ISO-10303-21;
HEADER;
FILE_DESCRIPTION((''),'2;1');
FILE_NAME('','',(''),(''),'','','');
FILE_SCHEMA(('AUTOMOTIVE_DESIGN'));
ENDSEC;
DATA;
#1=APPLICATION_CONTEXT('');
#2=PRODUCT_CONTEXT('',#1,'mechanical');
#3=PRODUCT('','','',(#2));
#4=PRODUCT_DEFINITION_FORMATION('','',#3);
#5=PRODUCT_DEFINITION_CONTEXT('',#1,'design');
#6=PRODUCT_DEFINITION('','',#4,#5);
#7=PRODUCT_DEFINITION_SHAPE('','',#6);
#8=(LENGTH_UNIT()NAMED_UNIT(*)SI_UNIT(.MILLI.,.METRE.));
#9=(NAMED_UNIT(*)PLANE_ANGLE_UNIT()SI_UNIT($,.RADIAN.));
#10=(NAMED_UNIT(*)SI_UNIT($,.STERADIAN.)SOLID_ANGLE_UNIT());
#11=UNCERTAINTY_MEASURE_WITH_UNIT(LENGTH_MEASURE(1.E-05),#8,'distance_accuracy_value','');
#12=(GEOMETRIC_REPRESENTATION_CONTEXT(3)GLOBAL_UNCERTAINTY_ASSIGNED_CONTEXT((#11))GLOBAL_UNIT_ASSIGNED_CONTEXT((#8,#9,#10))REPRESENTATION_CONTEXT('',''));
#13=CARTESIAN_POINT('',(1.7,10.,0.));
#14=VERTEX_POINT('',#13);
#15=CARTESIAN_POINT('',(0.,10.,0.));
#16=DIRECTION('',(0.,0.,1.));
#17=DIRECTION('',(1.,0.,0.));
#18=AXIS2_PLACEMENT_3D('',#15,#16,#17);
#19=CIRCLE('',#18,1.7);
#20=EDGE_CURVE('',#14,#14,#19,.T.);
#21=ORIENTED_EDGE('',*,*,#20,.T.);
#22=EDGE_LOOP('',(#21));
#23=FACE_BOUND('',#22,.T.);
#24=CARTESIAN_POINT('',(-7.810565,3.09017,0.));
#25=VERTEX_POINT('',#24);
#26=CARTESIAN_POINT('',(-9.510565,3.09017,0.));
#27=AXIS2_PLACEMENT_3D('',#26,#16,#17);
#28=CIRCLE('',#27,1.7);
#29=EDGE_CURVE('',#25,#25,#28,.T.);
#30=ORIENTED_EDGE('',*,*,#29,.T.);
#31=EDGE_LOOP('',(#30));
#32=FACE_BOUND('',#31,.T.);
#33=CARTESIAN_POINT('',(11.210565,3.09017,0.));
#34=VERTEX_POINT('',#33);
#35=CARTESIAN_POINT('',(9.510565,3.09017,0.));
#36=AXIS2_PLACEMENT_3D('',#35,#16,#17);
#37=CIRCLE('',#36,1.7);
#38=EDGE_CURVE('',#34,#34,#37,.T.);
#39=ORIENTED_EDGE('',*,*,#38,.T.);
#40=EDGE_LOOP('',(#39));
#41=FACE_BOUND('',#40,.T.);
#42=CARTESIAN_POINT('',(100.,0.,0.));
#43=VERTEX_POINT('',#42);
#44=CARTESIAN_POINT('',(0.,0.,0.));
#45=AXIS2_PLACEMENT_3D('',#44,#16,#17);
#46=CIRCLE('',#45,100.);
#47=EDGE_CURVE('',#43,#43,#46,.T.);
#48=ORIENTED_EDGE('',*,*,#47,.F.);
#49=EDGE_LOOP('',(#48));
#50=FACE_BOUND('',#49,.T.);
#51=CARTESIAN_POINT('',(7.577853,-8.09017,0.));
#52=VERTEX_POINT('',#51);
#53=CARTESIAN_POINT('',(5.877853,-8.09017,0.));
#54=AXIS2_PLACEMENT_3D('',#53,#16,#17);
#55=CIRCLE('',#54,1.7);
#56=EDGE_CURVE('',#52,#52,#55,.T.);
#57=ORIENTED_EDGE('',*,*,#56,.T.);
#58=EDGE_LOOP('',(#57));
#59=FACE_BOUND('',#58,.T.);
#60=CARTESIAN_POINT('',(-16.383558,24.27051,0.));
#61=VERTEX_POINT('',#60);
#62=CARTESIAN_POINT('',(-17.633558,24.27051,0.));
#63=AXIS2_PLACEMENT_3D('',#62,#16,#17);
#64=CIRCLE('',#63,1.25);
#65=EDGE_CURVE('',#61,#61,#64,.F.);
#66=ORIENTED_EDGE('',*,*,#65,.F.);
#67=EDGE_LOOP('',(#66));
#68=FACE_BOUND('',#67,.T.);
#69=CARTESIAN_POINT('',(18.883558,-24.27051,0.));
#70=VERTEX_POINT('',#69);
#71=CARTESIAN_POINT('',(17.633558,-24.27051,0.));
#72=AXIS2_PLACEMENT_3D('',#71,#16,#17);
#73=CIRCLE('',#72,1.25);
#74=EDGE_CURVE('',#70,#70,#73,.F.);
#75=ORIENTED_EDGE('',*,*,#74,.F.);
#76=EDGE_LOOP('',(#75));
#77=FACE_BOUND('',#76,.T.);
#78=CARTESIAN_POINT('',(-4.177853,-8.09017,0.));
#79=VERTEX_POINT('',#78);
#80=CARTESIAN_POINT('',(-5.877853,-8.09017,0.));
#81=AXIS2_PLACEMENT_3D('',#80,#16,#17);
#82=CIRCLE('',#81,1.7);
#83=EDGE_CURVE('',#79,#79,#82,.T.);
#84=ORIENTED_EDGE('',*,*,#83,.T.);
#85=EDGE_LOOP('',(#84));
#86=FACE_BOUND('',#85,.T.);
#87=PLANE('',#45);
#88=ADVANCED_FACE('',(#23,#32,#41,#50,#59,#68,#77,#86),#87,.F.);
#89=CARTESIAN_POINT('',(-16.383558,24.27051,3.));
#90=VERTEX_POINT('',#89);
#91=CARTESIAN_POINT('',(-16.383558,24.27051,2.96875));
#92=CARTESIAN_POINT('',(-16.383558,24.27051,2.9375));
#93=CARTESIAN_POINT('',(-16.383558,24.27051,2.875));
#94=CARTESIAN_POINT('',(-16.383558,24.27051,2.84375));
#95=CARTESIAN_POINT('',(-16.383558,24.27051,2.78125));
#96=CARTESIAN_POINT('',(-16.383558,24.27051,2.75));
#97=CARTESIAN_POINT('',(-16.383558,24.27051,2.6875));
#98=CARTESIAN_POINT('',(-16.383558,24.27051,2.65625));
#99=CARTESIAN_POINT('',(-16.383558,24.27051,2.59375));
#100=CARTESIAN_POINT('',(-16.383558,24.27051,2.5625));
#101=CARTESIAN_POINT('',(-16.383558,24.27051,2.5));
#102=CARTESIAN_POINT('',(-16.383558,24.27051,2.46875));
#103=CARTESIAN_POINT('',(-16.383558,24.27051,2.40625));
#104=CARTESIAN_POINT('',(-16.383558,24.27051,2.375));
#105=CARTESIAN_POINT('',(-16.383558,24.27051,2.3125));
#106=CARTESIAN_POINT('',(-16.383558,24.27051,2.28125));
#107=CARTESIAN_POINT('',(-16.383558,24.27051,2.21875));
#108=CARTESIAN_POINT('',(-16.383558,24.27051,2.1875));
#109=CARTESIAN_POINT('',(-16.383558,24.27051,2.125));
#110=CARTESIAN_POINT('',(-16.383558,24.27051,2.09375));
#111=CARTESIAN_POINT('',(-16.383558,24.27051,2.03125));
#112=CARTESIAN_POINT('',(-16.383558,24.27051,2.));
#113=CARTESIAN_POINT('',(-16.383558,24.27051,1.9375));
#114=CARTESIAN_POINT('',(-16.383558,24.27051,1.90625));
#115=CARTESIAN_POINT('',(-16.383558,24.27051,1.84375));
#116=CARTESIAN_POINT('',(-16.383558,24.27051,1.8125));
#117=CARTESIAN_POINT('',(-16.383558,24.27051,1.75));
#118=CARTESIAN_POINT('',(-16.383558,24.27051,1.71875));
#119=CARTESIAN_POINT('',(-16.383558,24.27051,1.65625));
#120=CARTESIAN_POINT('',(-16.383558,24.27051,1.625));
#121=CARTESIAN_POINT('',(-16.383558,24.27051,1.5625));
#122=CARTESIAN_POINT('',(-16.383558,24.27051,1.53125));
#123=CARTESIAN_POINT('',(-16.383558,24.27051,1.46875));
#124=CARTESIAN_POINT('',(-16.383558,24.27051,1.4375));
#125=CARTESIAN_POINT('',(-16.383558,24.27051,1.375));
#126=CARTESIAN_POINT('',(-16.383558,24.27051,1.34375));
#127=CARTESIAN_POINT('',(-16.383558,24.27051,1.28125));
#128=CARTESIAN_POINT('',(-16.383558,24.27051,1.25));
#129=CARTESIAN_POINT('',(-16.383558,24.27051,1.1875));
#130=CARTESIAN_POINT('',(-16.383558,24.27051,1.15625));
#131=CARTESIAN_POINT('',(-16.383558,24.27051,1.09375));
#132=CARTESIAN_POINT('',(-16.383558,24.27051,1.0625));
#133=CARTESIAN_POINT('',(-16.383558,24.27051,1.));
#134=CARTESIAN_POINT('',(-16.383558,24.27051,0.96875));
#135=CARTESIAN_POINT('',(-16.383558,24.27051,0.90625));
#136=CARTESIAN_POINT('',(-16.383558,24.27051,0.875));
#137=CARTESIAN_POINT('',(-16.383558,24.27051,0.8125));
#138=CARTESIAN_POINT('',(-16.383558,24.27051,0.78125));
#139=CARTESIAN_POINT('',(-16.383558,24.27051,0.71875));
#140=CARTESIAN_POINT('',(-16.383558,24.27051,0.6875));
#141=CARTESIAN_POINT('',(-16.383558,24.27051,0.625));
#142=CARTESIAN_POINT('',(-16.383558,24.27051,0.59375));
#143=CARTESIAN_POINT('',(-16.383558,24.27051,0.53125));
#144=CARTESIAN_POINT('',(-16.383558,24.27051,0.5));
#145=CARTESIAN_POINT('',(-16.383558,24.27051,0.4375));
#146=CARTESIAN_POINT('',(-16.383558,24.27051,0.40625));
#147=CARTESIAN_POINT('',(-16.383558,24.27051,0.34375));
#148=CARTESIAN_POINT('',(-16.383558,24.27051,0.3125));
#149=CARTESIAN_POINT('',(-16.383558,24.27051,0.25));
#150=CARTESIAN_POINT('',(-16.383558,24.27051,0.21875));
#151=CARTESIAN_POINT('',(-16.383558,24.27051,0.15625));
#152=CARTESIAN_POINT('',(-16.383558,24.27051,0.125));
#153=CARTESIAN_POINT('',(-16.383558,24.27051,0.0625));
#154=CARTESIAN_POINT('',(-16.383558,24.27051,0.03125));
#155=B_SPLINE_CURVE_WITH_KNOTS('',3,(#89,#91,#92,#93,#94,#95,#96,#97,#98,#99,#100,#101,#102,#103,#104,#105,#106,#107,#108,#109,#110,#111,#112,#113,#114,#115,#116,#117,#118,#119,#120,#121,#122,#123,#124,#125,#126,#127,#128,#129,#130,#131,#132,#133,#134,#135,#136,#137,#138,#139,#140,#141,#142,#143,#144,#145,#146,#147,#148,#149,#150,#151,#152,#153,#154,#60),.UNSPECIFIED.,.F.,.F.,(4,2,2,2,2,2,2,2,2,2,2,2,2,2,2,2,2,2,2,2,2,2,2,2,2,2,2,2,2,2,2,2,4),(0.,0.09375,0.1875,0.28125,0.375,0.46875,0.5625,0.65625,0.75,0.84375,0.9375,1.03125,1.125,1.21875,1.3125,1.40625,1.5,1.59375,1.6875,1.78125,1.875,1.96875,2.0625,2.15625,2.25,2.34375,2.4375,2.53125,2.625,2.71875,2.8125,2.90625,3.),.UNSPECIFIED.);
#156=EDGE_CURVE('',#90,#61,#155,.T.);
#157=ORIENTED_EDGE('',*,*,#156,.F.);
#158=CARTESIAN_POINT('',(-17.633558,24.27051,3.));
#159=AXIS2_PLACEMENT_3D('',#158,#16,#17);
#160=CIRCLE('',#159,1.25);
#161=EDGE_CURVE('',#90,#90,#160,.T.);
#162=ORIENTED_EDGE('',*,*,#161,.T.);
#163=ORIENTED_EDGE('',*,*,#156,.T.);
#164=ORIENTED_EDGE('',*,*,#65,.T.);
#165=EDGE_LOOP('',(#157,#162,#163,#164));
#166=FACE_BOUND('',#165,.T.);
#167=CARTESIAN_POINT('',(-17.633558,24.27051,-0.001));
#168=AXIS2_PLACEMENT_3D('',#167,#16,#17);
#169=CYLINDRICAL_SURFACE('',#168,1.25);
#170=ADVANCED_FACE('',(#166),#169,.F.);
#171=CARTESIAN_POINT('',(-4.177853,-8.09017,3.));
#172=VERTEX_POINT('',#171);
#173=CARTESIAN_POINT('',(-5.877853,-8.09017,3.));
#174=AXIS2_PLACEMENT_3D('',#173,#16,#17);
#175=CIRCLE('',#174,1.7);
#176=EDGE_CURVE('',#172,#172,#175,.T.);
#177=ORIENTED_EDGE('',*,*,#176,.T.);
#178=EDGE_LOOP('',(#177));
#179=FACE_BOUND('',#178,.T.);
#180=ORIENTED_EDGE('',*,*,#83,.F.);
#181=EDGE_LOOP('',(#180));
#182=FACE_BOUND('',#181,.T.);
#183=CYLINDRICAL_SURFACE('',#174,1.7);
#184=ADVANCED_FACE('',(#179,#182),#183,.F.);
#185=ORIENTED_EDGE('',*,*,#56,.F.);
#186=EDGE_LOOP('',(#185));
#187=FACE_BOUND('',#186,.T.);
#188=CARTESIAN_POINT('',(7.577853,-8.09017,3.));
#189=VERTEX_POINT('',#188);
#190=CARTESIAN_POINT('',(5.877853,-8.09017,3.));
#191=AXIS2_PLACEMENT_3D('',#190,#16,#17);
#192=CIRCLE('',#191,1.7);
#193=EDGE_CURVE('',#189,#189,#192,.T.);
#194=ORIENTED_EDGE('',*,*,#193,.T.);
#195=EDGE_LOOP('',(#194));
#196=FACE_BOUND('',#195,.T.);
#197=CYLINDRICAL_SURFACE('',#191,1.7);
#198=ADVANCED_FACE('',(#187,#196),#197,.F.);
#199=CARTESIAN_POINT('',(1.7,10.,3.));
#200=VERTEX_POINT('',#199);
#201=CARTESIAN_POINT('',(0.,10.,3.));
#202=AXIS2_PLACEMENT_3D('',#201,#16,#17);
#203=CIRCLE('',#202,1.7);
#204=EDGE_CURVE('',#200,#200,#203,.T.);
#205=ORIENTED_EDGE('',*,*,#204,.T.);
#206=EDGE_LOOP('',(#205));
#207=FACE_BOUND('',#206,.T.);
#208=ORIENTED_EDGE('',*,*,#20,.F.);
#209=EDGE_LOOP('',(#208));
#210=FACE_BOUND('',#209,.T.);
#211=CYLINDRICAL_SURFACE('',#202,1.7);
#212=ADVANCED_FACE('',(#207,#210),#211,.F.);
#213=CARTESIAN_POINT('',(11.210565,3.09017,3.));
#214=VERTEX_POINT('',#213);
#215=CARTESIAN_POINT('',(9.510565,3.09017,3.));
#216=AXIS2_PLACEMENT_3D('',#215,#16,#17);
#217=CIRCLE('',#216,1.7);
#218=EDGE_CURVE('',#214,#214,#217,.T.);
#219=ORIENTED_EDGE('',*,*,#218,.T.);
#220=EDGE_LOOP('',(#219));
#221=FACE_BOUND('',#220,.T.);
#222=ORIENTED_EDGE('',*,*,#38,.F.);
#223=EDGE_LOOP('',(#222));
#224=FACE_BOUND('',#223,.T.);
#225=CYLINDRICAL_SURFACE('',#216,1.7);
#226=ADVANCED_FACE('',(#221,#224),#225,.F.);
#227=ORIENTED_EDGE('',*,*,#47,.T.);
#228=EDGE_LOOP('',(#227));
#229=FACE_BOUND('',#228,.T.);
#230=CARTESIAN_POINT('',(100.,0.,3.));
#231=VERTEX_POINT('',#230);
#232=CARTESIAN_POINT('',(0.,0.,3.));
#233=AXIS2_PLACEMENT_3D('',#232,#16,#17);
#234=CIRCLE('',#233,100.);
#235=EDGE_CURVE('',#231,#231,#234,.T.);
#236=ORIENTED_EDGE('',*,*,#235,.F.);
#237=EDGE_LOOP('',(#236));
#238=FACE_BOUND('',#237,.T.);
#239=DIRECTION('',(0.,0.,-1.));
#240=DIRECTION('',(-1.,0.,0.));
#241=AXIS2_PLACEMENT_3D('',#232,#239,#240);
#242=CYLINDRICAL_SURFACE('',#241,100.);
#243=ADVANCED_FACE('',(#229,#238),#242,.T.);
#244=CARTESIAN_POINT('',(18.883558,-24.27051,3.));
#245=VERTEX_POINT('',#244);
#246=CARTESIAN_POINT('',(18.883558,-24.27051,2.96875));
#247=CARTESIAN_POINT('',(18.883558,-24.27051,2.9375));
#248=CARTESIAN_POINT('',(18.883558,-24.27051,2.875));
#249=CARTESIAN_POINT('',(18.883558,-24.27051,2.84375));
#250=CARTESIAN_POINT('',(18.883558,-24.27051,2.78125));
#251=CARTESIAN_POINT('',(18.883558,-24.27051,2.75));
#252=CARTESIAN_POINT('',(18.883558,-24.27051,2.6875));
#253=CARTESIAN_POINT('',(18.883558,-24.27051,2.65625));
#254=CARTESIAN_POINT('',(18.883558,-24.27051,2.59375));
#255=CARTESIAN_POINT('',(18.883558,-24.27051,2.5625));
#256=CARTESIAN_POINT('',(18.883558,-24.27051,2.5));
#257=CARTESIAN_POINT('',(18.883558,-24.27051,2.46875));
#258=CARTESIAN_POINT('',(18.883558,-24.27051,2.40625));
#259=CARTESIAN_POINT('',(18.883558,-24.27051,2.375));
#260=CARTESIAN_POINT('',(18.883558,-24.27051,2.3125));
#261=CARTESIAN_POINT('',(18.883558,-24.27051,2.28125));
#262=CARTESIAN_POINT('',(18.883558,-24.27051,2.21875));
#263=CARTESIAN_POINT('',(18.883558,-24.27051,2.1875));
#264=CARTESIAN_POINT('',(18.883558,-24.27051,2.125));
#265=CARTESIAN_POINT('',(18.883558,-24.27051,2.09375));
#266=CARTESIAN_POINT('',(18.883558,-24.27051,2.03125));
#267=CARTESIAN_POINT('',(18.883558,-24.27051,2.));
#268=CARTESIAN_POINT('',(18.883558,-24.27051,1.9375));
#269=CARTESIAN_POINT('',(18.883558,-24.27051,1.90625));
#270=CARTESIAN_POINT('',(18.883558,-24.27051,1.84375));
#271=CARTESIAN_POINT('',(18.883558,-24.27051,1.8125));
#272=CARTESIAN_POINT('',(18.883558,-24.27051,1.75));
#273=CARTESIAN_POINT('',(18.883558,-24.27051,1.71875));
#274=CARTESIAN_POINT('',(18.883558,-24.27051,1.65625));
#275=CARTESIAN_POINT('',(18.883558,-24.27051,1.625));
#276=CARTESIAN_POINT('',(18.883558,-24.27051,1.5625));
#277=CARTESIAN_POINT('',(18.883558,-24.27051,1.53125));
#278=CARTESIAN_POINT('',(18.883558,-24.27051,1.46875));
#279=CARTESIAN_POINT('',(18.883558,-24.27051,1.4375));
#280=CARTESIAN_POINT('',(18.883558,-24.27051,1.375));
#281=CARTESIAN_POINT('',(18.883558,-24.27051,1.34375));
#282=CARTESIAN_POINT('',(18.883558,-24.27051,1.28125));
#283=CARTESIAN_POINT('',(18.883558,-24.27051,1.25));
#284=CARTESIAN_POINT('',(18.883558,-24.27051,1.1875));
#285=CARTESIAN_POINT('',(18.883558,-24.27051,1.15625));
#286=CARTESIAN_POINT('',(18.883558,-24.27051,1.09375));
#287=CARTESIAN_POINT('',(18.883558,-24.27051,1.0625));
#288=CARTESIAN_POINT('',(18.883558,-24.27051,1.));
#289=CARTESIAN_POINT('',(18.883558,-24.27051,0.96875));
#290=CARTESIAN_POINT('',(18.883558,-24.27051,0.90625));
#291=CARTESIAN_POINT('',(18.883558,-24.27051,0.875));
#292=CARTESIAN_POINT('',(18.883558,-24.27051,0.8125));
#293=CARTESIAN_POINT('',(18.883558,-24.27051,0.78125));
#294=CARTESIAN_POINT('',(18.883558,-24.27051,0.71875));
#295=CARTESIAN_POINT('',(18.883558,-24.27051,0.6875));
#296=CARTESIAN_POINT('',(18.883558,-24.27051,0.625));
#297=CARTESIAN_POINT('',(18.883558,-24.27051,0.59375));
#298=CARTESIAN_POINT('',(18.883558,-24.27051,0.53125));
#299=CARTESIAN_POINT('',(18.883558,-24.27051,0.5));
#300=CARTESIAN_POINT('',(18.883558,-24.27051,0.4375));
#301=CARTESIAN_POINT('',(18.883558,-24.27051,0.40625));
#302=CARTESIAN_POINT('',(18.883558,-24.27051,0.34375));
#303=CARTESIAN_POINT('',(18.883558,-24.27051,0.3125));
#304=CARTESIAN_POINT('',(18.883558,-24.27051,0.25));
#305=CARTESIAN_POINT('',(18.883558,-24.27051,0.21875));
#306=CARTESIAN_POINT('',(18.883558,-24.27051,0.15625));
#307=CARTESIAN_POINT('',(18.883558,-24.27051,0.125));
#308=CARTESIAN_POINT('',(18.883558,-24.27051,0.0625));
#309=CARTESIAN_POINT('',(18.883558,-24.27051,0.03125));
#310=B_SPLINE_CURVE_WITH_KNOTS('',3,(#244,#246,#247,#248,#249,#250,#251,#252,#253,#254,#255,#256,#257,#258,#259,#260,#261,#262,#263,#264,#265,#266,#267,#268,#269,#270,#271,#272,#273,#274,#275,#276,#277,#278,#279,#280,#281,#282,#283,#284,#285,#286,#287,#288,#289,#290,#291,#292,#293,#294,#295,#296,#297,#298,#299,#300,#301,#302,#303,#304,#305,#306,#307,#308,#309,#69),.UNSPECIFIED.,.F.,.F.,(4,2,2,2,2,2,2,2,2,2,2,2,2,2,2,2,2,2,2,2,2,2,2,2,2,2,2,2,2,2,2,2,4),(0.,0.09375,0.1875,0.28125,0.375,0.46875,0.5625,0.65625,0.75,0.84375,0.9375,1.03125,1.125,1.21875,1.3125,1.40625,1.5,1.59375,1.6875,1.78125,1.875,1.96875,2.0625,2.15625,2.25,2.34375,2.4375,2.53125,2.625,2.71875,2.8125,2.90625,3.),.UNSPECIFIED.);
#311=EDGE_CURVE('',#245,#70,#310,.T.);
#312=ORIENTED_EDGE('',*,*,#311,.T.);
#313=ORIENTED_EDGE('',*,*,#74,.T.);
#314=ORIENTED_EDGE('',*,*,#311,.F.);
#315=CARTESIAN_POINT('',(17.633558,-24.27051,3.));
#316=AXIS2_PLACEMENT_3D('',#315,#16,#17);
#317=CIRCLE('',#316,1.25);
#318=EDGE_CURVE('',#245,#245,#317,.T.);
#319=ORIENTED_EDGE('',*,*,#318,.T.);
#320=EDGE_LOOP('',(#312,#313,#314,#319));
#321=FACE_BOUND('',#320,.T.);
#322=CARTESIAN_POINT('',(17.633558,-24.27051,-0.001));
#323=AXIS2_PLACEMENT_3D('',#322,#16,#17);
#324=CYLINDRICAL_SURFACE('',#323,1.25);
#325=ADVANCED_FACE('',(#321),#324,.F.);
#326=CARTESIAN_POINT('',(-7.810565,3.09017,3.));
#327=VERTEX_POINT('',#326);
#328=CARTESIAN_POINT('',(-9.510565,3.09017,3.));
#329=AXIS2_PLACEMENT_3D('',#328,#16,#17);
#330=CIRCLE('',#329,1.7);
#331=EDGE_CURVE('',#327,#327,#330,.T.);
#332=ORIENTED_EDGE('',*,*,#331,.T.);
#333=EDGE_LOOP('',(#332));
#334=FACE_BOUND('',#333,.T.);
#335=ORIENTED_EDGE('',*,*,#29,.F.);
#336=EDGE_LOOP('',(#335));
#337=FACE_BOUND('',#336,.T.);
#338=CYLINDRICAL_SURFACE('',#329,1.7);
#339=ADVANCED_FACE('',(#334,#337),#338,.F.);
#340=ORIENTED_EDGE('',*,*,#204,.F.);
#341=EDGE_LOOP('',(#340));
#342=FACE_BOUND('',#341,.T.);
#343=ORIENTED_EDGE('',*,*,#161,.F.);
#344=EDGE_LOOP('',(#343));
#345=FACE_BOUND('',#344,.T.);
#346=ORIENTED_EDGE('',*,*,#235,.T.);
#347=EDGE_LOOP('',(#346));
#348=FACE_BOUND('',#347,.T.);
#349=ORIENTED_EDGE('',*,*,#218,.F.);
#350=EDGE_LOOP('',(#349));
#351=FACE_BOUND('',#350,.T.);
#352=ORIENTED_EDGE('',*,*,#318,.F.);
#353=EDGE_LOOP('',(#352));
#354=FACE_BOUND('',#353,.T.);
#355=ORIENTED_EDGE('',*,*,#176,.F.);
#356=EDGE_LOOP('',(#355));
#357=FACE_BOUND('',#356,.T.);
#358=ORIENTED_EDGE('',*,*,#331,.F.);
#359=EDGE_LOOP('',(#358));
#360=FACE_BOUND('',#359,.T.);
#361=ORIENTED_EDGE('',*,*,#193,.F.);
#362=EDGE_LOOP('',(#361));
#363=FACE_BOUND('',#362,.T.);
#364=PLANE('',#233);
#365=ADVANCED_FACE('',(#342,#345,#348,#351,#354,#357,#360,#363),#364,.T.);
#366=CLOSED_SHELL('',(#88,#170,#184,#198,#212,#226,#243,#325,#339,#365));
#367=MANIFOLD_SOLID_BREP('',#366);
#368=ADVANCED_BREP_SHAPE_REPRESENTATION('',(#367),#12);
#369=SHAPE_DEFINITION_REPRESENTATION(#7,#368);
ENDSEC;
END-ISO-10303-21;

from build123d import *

# Parameters (mm, degrees)
ESQUISSE1_R              = 100
BOSS_EXTRU_1_DEPTH       = 3
D_GAGEMENT_M31_OUTLINE_R = 1.7
D_GAGEMENT_M31_DEPTH     = 3
ENL_V_MAT_EXTRU_1_REACH  = 143.453
ESQUISSE5_R              = 1.25


# Read off the part's stored shape, not the designer's step: Dégagement M31
with BuildPart() as part:
    # Esquisse1 → Boss.-Extru.1 (new body)
    with BuildSketch(Plane.XY):
        Circle(ESQUISSE1_R)
    extrude(amount=BOSS_EXTRU_1_DEPTH)

    # Dégagement M31 outline → Dégagement M31 (cut)
    with BuildSketch(Plane.XY):
        with Locations((9.510565163, 3.090169944)):
            Circle(D_GAGEMENT_M31_OUTLINE_R)
        with Locations((5.877852523, -8.090169944)):
            Circle(D_GAGEMENT_M31_OUTLINE_R)
        with Locations((-5.877852523, -8.090169944)):
            Circle(D_GAGEMENT_M31_OUTLINE_R)
        with Locations((-9.510565163, 3.090169944)):
            Circle(D_GAGEMENT_M31_OUTLINE_R)
        with Locations((0, 10)):
            Circle(D_GAGEMENT_M31_OUTLINE_R)
    extrude(amount=D_GAGEMENT_M31_DEPTH, mode=Mode.SUBTRACT)

    # Esquisse5 → Enlèv. mat.-Extru.1 (cut, up to next)
    with BuildSketch(Plane.XY.offset(3), mode=Mode.PRIVATE) as enl_v_mat_extru_1_sk1:
        with Locations((17.633557569, -24.270509831)):
            Circle(ESQUISSE5_R)
    enl_v_mat_extru_1_tool1 = extrude(enl_v_mat_extru_1_sk1.sketch, amount=-ENL_V_MAT_EXTRU_1_REACH, mode=Mode.PRIVATE) & part.part
    # Esquisse5 → Enlèv. mat.-Extru.1 (cut, up to next)
    with BuildSketch(Plane.XY.offset(3), mode=Mode.PRIVATE) as enl_v_mat_extru_1_sk2:
        with Locations((-17.633557569, 24.270509831)):
            Circle(ESQUISSE5_R)
    enl_v_mat_extru_1_tool2 = extrude(enl_v_mat_extru_1_sk2.sketch, amount=-ENL_V_MAT_EXTRU_1_REACH, mode=Mode.PRIVATE) & part.part
    add(enl_v_mat_extru_1_tool1.solids().sort_by_distance((17.633558, -24.27051, 3))[0], mode=Mode.SUBTRACT)
    add(enl_v_mat_extru_1_tool2.solids().sort_by_distance((-17.633558, 24.27051, 3))[0], mode=Mode.SUBTRACT)


solid = part.part
